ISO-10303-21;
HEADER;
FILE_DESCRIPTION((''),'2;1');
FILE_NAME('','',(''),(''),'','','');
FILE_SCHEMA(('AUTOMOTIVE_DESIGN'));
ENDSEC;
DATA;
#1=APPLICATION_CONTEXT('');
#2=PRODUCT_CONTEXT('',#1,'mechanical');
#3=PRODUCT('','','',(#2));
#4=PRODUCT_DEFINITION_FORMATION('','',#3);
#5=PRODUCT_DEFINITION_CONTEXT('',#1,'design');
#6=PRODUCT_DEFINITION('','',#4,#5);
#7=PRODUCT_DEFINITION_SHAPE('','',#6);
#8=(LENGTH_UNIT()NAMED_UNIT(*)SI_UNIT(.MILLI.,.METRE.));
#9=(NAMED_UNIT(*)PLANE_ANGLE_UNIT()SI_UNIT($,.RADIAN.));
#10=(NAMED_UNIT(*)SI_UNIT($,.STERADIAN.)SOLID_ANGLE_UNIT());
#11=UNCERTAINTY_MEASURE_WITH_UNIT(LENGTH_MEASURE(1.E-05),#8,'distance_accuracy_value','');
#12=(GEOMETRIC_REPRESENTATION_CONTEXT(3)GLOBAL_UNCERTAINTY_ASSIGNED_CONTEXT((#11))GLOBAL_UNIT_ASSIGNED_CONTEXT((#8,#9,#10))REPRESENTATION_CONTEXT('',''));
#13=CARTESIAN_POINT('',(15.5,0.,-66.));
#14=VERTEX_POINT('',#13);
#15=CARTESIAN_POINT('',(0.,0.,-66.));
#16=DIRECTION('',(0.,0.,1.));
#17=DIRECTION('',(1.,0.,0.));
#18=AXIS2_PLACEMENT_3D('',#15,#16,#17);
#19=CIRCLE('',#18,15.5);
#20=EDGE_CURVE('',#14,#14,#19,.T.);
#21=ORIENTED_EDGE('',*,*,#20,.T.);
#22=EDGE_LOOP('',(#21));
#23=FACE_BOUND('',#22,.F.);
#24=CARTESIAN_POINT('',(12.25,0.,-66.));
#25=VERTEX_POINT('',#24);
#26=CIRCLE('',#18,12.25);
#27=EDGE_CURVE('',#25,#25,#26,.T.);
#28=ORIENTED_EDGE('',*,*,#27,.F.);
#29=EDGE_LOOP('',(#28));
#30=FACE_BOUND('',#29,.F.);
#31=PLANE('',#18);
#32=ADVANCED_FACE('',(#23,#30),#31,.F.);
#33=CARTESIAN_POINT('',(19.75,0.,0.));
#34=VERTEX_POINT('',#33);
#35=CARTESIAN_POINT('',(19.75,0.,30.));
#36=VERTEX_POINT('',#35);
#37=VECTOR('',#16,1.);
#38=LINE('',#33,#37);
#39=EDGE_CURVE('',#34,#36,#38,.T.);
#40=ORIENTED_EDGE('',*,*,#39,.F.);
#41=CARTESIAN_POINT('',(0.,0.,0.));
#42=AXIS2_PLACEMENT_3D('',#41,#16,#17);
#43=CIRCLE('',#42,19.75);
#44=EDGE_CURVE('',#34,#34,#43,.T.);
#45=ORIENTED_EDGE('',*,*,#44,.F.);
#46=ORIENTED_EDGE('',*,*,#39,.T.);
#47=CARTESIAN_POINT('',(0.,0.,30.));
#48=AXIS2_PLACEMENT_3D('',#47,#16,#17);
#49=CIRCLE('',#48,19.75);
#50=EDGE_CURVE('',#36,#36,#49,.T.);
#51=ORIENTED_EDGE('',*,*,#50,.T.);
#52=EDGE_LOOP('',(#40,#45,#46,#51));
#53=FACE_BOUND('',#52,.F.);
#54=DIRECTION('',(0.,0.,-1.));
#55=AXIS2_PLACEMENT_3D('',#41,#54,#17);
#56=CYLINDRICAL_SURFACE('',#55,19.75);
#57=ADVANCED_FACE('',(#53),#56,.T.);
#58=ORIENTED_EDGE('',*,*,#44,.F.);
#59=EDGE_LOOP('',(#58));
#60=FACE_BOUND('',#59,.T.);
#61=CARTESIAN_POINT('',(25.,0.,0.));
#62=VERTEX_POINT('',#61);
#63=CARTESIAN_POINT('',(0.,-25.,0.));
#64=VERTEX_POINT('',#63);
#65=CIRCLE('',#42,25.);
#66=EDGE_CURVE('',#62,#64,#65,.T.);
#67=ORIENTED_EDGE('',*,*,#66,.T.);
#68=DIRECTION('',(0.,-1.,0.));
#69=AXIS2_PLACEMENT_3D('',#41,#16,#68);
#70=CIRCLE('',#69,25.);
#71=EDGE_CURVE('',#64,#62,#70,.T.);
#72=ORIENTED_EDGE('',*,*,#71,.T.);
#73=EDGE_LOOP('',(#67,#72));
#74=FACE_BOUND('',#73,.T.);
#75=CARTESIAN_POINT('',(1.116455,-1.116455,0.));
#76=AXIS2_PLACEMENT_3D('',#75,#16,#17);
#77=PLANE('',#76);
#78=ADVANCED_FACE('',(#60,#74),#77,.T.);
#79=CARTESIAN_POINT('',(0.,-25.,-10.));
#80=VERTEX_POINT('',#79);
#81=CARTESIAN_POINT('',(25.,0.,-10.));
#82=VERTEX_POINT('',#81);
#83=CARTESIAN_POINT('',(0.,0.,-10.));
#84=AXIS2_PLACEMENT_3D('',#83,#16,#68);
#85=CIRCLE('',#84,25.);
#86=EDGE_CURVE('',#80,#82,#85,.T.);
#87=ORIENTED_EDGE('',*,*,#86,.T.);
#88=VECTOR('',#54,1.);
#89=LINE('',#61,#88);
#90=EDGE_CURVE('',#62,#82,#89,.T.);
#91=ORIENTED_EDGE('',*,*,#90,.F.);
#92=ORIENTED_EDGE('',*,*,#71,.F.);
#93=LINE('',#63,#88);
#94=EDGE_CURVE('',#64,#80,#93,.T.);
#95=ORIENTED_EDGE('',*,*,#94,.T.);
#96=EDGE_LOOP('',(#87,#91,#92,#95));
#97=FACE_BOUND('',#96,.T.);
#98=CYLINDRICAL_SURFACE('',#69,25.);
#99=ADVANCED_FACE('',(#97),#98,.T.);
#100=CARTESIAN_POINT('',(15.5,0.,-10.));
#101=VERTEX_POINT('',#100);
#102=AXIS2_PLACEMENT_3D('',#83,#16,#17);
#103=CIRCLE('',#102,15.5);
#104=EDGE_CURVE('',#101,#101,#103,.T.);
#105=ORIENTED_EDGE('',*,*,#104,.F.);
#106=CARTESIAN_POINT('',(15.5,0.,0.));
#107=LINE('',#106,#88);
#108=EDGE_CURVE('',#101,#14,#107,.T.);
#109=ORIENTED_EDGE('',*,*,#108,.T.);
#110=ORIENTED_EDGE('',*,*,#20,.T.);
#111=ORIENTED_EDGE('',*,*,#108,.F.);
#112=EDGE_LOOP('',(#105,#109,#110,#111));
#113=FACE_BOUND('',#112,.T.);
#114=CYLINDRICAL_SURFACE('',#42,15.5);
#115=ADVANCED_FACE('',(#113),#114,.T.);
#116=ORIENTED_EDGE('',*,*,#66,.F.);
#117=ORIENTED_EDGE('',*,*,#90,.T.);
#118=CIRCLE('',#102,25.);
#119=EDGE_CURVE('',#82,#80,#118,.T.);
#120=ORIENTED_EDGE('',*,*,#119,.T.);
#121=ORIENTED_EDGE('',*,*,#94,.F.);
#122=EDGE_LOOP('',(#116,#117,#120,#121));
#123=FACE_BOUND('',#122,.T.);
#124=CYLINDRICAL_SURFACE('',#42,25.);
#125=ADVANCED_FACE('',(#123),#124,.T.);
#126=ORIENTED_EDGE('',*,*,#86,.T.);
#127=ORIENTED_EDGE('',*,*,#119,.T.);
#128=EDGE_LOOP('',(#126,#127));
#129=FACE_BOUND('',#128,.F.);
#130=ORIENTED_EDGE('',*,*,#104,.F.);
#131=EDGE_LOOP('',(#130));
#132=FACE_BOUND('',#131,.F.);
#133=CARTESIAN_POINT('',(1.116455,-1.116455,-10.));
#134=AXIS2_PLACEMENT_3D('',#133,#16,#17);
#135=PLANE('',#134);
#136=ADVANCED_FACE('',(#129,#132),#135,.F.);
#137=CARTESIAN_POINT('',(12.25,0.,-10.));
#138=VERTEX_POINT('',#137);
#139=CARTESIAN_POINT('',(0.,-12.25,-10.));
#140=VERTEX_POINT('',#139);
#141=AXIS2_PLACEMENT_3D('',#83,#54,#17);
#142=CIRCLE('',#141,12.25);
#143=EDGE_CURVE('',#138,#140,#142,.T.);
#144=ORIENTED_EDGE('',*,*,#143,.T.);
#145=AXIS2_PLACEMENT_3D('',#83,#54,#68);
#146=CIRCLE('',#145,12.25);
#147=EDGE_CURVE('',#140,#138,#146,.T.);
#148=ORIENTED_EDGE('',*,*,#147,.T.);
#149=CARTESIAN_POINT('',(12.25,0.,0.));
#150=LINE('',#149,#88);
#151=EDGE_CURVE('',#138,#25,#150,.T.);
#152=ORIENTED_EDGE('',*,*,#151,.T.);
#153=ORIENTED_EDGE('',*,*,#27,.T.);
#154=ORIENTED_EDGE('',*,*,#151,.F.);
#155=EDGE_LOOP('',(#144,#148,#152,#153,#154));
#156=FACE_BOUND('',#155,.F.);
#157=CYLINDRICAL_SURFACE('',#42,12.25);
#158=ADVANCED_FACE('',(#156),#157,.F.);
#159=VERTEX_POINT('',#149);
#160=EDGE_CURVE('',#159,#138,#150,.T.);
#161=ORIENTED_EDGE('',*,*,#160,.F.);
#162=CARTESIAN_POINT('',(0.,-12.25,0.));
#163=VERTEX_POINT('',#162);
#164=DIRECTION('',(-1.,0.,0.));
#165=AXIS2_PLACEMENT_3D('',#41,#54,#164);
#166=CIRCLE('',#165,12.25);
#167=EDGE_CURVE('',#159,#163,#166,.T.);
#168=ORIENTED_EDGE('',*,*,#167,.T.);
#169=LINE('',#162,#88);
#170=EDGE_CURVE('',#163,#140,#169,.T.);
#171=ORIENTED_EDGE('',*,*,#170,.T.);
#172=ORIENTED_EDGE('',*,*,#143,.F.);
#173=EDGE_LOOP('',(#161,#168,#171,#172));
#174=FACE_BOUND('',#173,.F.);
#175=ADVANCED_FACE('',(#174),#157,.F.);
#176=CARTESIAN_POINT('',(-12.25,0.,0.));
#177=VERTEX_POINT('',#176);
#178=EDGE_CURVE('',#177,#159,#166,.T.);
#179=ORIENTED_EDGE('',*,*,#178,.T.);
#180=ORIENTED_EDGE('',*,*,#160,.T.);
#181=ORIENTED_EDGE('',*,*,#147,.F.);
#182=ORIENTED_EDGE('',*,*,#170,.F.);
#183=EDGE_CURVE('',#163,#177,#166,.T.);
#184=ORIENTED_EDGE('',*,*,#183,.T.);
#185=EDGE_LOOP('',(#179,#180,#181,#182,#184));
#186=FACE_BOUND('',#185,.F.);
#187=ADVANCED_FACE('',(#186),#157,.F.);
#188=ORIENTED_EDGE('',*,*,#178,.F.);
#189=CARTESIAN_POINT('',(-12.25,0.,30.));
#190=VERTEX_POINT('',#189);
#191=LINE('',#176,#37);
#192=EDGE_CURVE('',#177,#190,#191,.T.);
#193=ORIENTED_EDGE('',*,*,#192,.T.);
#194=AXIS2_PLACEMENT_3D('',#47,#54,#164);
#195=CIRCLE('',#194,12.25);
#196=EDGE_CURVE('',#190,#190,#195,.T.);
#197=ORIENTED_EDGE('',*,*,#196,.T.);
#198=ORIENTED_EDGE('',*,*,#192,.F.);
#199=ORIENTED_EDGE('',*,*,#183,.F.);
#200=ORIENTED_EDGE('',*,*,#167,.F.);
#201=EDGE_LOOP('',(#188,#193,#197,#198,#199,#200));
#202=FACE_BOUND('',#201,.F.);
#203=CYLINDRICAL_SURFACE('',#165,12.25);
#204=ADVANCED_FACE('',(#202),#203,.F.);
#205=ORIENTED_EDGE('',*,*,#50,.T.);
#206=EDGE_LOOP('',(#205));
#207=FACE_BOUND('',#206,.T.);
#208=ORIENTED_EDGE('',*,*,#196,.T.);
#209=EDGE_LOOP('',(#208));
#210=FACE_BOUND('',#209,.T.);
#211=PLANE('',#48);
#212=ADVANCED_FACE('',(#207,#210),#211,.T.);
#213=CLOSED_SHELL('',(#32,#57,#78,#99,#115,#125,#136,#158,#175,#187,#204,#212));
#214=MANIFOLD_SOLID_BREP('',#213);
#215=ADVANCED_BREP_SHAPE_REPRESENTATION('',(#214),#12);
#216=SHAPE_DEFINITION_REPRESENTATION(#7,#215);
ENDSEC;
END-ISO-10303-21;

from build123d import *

# Parameters (mm, degrees)
F1_DEPTH = 30
F2_R     = 15.5
F2_R_2   = 12.25
F3_DEPTH = 66
F5_DEPTH = 10


# Not quite as in the source:
# - a feature names something its author has since deleted; it is built from what else it names


with BuildPart() as f1:
    # F0 (on Top) → F1 (new body)
    with BuildSketch(Plane.XY):
        with BuildLine():
            ThreePointArc((-19.75, 0), (0, -19.75), (19.75, 0))
            ThreePointArc((19.75, 0), (0, 19.75), (-19.75, 0))
        make_face()
        with BuildLine():
            ThreePointArc((12.25, 0), (0, -12.25), (-12.25, 0))
            ThreePointArc((-12.25, 0), (0, 12.25), (12.25, 0))
        make_face(mode=Mode.SUBTRACT)
    extrude(amount=F1_DEPTH)

    # F2 (on Top) → F3 (join)
    with BuildSketch(Plane.XY):
        Circle(F2_R)
        Circle(F2_R_2, mode=Mode.SUBTRACT)
    extrude(amount=-F3_DEPTH)

    # F4 (on Top) → F5 (join)
    with BuildSketch(Plane.XY):
        with BuildLine():
            ThreePointArc((0, -25), (17.6776695297, -17.6776695297), (25, 0))
            ThreePointArc((25, 0), (-17.6776695297, 17.6776695297), (0, -25))
        make_face()
        with BuildLine():
            ThreePointArc((12.25, 0), (8.6620580695, -8.6620580695), (0, -12.25))
            ThreePointArc((0, -12.25), (-8.6620580695, 8.6620580695), (12.25, 0))
        make_face(mode=Mode.SUBTRACT)
    extrude(amount=-F5_DEPTH)


solid = f1.part
